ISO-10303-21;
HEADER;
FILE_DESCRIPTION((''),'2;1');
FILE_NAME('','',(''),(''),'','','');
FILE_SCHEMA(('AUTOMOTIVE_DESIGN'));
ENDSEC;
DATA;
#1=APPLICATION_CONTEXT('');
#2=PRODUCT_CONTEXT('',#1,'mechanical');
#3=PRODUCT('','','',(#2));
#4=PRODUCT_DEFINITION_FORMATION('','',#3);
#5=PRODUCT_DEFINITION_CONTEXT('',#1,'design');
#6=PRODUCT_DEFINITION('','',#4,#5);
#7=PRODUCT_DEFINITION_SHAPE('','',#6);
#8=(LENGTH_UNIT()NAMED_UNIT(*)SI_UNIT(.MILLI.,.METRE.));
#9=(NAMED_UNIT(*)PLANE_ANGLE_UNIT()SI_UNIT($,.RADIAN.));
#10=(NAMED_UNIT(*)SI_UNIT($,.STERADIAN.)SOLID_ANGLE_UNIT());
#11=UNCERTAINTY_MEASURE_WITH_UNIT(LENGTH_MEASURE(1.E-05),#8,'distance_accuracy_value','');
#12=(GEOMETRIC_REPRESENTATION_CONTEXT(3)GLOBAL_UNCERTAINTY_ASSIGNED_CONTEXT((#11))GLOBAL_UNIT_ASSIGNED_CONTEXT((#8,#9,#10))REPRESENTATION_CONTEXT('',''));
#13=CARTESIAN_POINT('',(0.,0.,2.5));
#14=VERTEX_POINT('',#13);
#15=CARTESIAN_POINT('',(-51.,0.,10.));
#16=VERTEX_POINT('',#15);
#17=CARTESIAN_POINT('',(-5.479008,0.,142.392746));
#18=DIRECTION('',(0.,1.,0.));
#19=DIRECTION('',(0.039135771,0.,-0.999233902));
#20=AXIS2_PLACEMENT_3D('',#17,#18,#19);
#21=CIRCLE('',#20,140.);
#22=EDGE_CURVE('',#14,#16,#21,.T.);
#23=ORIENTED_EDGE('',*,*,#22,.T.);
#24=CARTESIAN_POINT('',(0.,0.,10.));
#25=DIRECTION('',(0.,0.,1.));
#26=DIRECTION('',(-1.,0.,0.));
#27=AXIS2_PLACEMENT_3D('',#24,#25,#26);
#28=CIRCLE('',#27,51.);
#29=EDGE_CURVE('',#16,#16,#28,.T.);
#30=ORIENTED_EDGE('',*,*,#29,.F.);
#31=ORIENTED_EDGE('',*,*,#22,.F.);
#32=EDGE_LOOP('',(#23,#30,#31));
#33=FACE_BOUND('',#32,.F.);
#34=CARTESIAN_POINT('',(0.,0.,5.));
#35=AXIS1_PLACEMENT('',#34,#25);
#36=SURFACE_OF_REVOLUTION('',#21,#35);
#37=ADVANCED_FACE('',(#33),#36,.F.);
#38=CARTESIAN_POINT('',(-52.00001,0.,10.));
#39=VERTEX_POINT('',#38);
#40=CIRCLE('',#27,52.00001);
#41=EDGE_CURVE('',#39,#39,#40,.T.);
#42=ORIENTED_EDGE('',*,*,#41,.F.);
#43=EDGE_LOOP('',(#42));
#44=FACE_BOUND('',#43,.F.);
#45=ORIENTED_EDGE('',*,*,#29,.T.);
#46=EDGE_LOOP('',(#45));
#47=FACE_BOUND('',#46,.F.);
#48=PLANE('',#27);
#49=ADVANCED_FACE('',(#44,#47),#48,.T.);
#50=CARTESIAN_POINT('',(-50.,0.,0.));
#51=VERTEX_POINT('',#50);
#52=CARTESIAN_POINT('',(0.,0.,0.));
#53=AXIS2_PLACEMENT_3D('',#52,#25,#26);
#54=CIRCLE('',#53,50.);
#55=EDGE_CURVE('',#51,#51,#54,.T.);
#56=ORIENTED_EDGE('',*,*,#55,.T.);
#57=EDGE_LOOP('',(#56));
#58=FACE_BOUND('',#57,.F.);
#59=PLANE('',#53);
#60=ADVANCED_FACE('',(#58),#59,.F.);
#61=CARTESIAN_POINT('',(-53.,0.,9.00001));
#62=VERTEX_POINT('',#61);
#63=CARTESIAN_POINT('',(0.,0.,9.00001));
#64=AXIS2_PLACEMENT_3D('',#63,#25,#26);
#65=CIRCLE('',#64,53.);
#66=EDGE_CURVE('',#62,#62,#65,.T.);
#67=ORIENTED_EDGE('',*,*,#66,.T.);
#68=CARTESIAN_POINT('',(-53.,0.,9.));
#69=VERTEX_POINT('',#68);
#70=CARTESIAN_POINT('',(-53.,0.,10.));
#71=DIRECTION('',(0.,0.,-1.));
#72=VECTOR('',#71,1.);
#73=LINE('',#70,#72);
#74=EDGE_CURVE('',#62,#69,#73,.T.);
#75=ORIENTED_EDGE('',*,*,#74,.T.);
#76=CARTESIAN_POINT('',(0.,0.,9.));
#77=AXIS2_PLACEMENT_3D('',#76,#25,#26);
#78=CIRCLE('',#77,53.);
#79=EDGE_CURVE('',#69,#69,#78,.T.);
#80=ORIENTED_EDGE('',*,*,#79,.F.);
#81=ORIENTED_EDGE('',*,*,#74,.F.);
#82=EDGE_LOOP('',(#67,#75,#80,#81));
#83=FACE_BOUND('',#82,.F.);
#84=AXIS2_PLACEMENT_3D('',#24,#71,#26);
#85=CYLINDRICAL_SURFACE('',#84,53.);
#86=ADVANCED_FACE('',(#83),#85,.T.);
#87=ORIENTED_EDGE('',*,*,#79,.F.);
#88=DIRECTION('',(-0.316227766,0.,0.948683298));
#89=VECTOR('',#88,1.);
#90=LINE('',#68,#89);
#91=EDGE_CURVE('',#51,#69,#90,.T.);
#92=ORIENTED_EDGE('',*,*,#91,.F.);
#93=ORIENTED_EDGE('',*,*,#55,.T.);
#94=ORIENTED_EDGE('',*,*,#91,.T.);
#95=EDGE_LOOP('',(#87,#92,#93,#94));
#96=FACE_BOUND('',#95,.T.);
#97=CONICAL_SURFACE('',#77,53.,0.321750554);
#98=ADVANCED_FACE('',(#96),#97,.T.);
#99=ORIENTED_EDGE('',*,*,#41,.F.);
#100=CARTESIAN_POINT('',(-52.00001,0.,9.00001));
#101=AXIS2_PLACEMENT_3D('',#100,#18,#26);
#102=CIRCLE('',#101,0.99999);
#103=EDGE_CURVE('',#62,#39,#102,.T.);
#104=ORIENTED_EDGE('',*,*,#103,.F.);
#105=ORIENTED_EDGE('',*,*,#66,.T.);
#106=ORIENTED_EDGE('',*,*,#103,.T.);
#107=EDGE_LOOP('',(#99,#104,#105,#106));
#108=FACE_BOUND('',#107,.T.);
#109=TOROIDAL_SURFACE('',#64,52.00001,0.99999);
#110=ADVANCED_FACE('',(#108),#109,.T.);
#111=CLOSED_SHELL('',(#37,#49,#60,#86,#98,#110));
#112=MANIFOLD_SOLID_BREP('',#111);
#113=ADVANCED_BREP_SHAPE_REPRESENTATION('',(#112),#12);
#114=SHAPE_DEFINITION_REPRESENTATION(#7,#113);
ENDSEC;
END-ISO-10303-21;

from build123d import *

# Parameters (mm, degrees)
F2_SIZE2 = 9
F2_SIZE  = 3
F3_R     = 0.99999


# Not quite as in the source:
# - a fillet or chamfer is up to 0.001 mm smaller than in the source, because OpenCascade refuses the exact size


with BuildPart() as f1:
    # F0 (on Front) → F1 (revolve)
    with BuildSketch(Plane.XZ):
        with BuildLine():
            Line((-53, 0), (0, 0))
            Line((0, 0), (0, 2.5))
            ThreePointArc((0, 2.5), (-25.8481665636, 3.8824673673), (-51, 10))
            Line((-51, 10), (-53, 10))
            Line((-53, 10), (-53, 0))
        make_face()
    revolve(axis=Axis((0, 0, 5), (0, 0, 1)))

    # F2
    f2_edges = [f1.edges().sort_by_distance(p)[0] for p in [
        (53, 0, 0),
    ]]
    f2_side = f1.faces().sort_by_distance((0, 0, 0))[0]
    chamfer(f2_edges, length=F2_SIZE, length2=F2_SIZE2, reference=f2_side)

    # F3 (radius 1 in the source; OpenCascade refuses exactly that, so slightly less here)
    f3_edges = [f1.edges().sort_by_distance(p)[0] for p in [
        (53, 0, 10),
    ]]
    fillet(f3_edges, radius=F3_R)


solid = f1.part
